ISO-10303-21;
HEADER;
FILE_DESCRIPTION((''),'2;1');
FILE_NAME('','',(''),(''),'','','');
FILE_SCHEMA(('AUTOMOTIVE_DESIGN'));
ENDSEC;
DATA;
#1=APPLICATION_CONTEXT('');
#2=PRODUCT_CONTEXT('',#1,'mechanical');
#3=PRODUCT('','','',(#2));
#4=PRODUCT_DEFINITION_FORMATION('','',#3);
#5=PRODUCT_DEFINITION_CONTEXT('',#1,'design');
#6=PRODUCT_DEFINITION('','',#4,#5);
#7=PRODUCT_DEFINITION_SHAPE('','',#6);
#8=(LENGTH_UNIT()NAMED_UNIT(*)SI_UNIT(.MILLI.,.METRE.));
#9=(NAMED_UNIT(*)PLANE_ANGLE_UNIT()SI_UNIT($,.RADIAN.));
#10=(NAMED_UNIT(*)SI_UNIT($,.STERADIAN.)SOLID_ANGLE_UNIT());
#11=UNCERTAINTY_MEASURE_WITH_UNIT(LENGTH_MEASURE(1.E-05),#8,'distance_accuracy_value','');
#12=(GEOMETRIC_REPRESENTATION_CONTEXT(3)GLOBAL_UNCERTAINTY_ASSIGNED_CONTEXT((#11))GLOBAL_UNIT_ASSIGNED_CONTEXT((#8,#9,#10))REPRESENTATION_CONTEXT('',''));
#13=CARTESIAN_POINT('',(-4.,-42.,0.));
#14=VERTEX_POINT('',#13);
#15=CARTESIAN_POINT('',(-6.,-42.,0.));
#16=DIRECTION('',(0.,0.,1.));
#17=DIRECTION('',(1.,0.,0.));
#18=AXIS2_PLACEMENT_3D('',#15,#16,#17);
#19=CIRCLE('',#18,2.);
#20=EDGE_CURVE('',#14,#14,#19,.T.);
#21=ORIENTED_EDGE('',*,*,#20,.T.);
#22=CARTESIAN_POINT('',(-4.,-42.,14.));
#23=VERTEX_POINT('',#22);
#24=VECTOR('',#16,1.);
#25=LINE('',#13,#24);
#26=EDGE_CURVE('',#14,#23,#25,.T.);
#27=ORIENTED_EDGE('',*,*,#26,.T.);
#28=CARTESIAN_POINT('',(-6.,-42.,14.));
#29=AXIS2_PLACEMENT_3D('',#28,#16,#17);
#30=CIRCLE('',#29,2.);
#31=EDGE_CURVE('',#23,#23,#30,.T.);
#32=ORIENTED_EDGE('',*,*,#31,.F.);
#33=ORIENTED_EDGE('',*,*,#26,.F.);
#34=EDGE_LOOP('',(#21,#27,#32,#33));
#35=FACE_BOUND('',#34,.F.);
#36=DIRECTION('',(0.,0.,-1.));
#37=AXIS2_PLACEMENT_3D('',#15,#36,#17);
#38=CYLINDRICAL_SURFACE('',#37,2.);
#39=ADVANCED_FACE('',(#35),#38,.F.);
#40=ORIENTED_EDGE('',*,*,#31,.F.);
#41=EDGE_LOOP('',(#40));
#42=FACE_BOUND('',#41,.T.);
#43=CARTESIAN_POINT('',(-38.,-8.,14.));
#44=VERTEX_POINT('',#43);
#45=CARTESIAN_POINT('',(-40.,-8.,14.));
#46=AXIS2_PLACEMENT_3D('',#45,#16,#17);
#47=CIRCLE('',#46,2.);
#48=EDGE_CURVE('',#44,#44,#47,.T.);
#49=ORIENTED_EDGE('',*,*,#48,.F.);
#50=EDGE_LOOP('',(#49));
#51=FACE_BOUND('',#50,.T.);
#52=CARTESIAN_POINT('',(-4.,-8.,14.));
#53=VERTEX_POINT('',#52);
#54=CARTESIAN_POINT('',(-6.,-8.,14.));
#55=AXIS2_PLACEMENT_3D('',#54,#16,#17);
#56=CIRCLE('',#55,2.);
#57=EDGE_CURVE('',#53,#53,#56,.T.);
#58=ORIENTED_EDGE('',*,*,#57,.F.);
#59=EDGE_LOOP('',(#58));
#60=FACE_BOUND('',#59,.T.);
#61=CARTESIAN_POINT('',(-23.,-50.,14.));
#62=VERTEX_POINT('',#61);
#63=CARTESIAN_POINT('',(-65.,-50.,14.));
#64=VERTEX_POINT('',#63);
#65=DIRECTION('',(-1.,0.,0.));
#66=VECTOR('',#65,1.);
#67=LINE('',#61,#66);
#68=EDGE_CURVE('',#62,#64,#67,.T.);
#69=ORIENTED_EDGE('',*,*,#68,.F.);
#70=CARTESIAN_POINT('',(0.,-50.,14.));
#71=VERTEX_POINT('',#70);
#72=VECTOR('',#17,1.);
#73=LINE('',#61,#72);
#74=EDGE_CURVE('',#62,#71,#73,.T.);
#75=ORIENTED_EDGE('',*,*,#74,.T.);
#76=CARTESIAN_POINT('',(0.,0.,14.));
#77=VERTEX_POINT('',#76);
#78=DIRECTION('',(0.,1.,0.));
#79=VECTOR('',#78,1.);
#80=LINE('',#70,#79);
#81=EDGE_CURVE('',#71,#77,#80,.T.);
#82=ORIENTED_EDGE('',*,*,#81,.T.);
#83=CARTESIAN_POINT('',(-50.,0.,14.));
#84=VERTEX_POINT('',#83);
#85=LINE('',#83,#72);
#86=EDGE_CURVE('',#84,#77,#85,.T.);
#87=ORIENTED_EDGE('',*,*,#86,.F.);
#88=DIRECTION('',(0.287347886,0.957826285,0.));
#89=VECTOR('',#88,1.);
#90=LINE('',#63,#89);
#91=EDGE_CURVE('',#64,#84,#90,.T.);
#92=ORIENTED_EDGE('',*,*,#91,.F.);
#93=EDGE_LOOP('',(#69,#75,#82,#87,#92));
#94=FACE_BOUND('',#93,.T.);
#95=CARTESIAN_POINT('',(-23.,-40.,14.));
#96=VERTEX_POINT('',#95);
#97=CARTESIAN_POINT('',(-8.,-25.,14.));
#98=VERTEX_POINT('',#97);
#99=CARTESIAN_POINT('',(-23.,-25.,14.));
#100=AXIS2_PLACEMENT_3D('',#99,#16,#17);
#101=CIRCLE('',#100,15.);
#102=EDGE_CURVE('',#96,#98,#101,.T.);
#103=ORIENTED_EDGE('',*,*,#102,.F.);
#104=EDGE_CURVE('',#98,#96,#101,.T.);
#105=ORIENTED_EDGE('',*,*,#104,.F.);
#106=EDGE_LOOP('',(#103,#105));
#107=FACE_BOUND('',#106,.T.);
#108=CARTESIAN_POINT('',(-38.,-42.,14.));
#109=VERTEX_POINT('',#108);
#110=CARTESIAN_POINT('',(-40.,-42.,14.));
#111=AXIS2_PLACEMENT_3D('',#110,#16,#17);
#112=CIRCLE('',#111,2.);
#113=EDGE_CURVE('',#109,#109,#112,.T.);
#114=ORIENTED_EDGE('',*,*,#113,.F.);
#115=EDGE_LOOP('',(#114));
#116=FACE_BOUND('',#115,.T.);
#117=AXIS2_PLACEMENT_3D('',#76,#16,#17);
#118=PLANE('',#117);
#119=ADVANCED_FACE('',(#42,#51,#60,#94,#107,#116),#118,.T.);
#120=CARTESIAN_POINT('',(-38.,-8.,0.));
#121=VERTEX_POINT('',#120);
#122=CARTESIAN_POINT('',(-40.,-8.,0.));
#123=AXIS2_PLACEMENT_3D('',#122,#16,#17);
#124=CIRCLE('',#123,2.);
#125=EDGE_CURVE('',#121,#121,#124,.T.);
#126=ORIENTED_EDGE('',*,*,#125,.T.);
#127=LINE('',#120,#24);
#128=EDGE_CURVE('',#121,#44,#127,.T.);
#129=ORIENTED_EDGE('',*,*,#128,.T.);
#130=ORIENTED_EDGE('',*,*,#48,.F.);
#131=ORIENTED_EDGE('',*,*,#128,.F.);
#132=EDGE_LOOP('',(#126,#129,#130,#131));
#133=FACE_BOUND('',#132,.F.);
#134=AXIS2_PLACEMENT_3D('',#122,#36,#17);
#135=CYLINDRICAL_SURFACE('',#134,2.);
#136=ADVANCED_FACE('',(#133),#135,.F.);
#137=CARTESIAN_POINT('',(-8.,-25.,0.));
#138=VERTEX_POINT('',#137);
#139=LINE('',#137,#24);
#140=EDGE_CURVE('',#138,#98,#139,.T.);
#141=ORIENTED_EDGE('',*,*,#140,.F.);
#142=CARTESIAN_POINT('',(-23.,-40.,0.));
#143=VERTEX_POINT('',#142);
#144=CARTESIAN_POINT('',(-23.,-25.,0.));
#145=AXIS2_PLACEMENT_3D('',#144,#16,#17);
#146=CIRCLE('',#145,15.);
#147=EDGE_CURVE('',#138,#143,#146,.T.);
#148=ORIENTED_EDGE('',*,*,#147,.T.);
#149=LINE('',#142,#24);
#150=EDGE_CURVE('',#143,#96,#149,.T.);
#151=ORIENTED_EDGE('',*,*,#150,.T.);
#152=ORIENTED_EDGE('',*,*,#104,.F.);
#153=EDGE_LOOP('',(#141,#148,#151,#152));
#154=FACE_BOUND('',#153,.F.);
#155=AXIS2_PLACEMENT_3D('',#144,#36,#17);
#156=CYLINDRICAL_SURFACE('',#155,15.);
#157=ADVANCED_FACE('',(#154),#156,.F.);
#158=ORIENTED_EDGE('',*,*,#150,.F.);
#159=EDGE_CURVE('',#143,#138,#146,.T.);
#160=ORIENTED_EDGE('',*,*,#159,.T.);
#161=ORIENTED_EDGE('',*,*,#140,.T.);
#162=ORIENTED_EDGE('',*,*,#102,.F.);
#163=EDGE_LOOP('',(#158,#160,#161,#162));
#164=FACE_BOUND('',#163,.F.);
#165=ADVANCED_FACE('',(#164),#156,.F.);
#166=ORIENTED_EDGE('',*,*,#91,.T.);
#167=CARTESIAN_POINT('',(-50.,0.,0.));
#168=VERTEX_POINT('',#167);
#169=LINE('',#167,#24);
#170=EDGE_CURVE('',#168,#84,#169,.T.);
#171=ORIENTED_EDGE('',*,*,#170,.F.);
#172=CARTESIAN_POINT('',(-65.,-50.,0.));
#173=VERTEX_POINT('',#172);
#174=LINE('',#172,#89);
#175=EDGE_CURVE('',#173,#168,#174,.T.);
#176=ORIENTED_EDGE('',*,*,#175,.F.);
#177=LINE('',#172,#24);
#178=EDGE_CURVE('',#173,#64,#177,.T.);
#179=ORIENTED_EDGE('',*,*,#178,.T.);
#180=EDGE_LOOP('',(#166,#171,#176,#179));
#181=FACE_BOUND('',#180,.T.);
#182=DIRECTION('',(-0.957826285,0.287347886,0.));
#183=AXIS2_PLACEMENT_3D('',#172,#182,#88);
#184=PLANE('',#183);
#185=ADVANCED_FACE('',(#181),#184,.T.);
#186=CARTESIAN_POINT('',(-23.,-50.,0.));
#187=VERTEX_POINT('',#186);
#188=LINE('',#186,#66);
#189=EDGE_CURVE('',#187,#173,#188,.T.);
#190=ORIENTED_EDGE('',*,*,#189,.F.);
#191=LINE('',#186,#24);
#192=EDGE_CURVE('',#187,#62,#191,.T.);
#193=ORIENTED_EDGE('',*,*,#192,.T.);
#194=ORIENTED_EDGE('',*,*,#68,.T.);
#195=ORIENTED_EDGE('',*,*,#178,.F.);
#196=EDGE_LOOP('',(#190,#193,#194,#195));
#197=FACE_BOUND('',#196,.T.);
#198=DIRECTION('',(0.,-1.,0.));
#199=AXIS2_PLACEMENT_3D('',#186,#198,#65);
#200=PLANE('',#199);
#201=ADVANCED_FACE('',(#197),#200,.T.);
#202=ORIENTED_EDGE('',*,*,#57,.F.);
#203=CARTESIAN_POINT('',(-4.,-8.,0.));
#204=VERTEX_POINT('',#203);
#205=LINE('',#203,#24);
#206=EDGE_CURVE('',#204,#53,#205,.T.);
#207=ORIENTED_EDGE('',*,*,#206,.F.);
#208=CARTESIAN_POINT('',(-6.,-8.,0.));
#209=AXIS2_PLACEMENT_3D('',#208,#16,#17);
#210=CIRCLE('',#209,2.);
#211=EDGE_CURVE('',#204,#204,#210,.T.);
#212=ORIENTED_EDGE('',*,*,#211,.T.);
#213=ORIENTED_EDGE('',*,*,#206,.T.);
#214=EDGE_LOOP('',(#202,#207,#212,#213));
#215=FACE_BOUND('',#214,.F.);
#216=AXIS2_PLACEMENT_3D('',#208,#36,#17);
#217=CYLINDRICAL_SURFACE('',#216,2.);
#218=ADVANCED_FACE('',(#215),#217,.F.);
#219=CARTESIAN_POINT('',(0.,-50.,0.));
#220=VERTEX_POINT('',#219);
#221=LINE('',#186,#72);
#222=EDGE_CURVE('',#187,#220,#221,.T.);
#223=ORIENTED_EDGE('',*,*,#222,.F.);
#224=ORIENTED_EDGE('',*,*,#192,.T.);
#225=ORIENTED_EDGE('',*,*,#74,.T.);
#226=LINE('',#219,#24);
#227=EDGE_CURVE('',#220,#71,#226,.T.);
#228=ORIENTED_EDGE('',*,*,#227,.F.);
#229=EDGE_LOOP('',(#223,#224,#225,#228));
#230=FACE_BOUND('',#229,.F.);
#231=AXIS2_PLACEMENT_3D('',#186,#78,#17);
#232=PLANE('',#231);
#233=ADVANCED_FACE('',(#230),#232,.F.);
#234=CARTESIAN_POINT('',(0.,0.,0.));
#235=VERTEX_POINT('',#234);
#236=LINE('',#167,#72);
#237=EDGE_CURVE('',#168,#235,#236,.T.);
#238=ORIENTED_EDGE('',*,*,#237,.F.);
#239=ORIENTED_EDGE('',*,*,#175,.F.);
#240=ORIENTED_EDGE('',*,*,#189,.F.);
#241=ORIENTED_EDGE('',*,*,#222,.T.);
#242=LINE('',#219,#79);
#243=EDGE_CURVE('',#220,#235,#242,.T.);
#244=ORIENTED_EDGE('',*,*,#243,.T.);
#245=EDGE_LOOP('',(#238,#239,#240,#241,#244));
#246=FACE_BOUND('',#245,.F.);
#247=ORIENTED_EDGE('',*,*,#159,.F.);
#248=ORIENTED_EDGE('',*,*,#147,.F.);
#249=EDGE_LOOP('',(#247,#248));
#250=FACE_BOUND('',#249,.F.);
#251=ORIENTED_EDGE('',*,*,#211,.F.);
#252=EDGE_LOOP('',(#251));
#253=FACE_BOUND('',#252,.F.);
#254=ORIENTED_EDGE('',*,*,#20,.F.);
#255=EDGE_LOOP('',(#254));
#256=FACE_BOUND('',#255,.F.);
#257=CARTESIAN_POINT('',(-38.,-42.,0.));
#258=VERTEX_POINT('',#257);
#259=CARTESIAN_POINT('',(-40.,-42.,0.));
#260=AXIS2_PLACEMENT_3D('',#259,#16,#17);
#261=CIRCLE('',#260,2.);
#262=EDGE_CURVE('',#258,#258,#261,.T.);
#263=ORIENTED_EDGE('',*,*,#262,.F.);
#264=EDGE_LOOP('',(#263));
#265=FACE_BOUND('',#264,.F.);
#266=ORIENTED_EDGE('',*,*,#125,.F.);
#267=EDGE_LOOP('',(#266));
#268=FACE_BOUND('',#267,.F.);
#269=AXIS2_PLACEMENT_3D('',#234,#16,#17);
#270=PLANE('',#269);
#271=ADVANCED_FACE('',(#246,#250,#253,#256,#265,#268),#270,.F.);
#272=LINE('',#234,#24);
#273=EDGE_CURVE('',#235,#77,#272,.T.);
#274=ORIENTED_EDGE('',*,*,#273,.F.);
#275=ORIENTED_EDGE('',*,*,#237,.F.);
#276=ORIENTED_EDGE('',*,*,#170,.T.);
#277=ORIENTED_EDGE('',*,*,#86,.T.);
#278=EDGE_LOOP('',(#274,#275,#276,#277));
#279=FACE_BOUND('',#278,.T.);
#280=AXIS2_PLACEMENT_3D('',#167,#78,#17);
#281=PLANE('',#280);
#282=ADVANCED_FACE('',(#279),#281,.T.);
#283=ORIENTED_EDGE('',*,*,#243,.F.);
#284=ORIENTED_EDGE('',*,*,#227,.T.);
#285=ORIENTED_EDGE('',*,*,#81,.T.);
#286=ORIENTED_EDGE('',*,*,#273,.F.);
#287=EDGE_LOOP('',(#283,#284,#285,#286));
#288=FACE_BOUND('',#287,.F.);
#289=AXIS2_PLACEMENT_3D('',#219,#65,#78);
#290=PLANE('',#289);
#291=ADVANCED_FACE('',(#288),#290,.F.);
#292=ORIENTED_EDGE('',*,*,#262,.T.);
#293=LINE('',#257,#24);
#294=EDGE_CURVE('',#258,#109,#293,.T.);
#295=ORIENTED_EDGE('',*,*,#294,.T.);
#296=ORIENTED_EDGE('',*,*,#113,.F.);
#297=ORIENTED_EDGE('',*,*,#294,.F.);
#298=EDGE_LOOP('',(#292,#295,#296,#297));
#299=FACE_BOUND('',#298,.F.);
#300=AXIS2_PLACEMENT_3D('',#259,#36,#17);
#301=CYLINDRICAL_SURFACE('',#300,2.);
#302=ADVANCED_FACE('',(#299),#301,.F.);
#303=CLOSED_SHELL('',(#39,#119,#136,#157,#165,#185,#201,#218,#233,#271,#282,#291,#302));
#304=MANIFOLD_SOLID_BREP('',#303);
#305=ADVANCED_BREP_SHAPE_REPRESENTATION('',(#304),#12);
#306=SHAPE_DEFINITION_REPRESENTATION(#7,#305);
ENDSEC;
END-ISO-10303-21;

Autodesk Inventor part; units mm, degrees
ref_plane "YZ Plane" through (0, 0, 0) normal (1, 0, 0) x (0, 1, 0)
ref_plane "XZ Plane" through (0, 0, 0) normal (0, 1, 0) x (-1, 0, 0)
ref_plane "XY Plane" through (0, 0, 0) normal (0, 0, 1) x (1, 0, 0)
sketch "Szkic6" plane through (0, 0, 0) normal (0, 0, 1) x (1, 0, 0)
  circle A0 centre (-40, -42) radius 2
  circle A1 centre (-40, -8) radius 2
  circle A2 centre (-6, -8) radius 2
  circle A3 centre (-6, -42) radius 2
  circle A4 centre (-23, -25) radius 15
  line L0 (0, -50) -> (0, 0)
  line L1 (-50, 0) -> (0, 0)
  line L2 (-65, -50) -> (-50, 0)
  line L3 (-23, -25) -> (-23, -50)
  line L4 (-23, -50) -> (0, -50)
  line L5 (-23, -50) -> (-65, -50)
  dimension "d30" = 25
extrude "Wyciągnięcie proste4" add sketch "Szkic6" along normal blind 14
properties part number "Wspornik łożyska osi Y - prawa strona"
